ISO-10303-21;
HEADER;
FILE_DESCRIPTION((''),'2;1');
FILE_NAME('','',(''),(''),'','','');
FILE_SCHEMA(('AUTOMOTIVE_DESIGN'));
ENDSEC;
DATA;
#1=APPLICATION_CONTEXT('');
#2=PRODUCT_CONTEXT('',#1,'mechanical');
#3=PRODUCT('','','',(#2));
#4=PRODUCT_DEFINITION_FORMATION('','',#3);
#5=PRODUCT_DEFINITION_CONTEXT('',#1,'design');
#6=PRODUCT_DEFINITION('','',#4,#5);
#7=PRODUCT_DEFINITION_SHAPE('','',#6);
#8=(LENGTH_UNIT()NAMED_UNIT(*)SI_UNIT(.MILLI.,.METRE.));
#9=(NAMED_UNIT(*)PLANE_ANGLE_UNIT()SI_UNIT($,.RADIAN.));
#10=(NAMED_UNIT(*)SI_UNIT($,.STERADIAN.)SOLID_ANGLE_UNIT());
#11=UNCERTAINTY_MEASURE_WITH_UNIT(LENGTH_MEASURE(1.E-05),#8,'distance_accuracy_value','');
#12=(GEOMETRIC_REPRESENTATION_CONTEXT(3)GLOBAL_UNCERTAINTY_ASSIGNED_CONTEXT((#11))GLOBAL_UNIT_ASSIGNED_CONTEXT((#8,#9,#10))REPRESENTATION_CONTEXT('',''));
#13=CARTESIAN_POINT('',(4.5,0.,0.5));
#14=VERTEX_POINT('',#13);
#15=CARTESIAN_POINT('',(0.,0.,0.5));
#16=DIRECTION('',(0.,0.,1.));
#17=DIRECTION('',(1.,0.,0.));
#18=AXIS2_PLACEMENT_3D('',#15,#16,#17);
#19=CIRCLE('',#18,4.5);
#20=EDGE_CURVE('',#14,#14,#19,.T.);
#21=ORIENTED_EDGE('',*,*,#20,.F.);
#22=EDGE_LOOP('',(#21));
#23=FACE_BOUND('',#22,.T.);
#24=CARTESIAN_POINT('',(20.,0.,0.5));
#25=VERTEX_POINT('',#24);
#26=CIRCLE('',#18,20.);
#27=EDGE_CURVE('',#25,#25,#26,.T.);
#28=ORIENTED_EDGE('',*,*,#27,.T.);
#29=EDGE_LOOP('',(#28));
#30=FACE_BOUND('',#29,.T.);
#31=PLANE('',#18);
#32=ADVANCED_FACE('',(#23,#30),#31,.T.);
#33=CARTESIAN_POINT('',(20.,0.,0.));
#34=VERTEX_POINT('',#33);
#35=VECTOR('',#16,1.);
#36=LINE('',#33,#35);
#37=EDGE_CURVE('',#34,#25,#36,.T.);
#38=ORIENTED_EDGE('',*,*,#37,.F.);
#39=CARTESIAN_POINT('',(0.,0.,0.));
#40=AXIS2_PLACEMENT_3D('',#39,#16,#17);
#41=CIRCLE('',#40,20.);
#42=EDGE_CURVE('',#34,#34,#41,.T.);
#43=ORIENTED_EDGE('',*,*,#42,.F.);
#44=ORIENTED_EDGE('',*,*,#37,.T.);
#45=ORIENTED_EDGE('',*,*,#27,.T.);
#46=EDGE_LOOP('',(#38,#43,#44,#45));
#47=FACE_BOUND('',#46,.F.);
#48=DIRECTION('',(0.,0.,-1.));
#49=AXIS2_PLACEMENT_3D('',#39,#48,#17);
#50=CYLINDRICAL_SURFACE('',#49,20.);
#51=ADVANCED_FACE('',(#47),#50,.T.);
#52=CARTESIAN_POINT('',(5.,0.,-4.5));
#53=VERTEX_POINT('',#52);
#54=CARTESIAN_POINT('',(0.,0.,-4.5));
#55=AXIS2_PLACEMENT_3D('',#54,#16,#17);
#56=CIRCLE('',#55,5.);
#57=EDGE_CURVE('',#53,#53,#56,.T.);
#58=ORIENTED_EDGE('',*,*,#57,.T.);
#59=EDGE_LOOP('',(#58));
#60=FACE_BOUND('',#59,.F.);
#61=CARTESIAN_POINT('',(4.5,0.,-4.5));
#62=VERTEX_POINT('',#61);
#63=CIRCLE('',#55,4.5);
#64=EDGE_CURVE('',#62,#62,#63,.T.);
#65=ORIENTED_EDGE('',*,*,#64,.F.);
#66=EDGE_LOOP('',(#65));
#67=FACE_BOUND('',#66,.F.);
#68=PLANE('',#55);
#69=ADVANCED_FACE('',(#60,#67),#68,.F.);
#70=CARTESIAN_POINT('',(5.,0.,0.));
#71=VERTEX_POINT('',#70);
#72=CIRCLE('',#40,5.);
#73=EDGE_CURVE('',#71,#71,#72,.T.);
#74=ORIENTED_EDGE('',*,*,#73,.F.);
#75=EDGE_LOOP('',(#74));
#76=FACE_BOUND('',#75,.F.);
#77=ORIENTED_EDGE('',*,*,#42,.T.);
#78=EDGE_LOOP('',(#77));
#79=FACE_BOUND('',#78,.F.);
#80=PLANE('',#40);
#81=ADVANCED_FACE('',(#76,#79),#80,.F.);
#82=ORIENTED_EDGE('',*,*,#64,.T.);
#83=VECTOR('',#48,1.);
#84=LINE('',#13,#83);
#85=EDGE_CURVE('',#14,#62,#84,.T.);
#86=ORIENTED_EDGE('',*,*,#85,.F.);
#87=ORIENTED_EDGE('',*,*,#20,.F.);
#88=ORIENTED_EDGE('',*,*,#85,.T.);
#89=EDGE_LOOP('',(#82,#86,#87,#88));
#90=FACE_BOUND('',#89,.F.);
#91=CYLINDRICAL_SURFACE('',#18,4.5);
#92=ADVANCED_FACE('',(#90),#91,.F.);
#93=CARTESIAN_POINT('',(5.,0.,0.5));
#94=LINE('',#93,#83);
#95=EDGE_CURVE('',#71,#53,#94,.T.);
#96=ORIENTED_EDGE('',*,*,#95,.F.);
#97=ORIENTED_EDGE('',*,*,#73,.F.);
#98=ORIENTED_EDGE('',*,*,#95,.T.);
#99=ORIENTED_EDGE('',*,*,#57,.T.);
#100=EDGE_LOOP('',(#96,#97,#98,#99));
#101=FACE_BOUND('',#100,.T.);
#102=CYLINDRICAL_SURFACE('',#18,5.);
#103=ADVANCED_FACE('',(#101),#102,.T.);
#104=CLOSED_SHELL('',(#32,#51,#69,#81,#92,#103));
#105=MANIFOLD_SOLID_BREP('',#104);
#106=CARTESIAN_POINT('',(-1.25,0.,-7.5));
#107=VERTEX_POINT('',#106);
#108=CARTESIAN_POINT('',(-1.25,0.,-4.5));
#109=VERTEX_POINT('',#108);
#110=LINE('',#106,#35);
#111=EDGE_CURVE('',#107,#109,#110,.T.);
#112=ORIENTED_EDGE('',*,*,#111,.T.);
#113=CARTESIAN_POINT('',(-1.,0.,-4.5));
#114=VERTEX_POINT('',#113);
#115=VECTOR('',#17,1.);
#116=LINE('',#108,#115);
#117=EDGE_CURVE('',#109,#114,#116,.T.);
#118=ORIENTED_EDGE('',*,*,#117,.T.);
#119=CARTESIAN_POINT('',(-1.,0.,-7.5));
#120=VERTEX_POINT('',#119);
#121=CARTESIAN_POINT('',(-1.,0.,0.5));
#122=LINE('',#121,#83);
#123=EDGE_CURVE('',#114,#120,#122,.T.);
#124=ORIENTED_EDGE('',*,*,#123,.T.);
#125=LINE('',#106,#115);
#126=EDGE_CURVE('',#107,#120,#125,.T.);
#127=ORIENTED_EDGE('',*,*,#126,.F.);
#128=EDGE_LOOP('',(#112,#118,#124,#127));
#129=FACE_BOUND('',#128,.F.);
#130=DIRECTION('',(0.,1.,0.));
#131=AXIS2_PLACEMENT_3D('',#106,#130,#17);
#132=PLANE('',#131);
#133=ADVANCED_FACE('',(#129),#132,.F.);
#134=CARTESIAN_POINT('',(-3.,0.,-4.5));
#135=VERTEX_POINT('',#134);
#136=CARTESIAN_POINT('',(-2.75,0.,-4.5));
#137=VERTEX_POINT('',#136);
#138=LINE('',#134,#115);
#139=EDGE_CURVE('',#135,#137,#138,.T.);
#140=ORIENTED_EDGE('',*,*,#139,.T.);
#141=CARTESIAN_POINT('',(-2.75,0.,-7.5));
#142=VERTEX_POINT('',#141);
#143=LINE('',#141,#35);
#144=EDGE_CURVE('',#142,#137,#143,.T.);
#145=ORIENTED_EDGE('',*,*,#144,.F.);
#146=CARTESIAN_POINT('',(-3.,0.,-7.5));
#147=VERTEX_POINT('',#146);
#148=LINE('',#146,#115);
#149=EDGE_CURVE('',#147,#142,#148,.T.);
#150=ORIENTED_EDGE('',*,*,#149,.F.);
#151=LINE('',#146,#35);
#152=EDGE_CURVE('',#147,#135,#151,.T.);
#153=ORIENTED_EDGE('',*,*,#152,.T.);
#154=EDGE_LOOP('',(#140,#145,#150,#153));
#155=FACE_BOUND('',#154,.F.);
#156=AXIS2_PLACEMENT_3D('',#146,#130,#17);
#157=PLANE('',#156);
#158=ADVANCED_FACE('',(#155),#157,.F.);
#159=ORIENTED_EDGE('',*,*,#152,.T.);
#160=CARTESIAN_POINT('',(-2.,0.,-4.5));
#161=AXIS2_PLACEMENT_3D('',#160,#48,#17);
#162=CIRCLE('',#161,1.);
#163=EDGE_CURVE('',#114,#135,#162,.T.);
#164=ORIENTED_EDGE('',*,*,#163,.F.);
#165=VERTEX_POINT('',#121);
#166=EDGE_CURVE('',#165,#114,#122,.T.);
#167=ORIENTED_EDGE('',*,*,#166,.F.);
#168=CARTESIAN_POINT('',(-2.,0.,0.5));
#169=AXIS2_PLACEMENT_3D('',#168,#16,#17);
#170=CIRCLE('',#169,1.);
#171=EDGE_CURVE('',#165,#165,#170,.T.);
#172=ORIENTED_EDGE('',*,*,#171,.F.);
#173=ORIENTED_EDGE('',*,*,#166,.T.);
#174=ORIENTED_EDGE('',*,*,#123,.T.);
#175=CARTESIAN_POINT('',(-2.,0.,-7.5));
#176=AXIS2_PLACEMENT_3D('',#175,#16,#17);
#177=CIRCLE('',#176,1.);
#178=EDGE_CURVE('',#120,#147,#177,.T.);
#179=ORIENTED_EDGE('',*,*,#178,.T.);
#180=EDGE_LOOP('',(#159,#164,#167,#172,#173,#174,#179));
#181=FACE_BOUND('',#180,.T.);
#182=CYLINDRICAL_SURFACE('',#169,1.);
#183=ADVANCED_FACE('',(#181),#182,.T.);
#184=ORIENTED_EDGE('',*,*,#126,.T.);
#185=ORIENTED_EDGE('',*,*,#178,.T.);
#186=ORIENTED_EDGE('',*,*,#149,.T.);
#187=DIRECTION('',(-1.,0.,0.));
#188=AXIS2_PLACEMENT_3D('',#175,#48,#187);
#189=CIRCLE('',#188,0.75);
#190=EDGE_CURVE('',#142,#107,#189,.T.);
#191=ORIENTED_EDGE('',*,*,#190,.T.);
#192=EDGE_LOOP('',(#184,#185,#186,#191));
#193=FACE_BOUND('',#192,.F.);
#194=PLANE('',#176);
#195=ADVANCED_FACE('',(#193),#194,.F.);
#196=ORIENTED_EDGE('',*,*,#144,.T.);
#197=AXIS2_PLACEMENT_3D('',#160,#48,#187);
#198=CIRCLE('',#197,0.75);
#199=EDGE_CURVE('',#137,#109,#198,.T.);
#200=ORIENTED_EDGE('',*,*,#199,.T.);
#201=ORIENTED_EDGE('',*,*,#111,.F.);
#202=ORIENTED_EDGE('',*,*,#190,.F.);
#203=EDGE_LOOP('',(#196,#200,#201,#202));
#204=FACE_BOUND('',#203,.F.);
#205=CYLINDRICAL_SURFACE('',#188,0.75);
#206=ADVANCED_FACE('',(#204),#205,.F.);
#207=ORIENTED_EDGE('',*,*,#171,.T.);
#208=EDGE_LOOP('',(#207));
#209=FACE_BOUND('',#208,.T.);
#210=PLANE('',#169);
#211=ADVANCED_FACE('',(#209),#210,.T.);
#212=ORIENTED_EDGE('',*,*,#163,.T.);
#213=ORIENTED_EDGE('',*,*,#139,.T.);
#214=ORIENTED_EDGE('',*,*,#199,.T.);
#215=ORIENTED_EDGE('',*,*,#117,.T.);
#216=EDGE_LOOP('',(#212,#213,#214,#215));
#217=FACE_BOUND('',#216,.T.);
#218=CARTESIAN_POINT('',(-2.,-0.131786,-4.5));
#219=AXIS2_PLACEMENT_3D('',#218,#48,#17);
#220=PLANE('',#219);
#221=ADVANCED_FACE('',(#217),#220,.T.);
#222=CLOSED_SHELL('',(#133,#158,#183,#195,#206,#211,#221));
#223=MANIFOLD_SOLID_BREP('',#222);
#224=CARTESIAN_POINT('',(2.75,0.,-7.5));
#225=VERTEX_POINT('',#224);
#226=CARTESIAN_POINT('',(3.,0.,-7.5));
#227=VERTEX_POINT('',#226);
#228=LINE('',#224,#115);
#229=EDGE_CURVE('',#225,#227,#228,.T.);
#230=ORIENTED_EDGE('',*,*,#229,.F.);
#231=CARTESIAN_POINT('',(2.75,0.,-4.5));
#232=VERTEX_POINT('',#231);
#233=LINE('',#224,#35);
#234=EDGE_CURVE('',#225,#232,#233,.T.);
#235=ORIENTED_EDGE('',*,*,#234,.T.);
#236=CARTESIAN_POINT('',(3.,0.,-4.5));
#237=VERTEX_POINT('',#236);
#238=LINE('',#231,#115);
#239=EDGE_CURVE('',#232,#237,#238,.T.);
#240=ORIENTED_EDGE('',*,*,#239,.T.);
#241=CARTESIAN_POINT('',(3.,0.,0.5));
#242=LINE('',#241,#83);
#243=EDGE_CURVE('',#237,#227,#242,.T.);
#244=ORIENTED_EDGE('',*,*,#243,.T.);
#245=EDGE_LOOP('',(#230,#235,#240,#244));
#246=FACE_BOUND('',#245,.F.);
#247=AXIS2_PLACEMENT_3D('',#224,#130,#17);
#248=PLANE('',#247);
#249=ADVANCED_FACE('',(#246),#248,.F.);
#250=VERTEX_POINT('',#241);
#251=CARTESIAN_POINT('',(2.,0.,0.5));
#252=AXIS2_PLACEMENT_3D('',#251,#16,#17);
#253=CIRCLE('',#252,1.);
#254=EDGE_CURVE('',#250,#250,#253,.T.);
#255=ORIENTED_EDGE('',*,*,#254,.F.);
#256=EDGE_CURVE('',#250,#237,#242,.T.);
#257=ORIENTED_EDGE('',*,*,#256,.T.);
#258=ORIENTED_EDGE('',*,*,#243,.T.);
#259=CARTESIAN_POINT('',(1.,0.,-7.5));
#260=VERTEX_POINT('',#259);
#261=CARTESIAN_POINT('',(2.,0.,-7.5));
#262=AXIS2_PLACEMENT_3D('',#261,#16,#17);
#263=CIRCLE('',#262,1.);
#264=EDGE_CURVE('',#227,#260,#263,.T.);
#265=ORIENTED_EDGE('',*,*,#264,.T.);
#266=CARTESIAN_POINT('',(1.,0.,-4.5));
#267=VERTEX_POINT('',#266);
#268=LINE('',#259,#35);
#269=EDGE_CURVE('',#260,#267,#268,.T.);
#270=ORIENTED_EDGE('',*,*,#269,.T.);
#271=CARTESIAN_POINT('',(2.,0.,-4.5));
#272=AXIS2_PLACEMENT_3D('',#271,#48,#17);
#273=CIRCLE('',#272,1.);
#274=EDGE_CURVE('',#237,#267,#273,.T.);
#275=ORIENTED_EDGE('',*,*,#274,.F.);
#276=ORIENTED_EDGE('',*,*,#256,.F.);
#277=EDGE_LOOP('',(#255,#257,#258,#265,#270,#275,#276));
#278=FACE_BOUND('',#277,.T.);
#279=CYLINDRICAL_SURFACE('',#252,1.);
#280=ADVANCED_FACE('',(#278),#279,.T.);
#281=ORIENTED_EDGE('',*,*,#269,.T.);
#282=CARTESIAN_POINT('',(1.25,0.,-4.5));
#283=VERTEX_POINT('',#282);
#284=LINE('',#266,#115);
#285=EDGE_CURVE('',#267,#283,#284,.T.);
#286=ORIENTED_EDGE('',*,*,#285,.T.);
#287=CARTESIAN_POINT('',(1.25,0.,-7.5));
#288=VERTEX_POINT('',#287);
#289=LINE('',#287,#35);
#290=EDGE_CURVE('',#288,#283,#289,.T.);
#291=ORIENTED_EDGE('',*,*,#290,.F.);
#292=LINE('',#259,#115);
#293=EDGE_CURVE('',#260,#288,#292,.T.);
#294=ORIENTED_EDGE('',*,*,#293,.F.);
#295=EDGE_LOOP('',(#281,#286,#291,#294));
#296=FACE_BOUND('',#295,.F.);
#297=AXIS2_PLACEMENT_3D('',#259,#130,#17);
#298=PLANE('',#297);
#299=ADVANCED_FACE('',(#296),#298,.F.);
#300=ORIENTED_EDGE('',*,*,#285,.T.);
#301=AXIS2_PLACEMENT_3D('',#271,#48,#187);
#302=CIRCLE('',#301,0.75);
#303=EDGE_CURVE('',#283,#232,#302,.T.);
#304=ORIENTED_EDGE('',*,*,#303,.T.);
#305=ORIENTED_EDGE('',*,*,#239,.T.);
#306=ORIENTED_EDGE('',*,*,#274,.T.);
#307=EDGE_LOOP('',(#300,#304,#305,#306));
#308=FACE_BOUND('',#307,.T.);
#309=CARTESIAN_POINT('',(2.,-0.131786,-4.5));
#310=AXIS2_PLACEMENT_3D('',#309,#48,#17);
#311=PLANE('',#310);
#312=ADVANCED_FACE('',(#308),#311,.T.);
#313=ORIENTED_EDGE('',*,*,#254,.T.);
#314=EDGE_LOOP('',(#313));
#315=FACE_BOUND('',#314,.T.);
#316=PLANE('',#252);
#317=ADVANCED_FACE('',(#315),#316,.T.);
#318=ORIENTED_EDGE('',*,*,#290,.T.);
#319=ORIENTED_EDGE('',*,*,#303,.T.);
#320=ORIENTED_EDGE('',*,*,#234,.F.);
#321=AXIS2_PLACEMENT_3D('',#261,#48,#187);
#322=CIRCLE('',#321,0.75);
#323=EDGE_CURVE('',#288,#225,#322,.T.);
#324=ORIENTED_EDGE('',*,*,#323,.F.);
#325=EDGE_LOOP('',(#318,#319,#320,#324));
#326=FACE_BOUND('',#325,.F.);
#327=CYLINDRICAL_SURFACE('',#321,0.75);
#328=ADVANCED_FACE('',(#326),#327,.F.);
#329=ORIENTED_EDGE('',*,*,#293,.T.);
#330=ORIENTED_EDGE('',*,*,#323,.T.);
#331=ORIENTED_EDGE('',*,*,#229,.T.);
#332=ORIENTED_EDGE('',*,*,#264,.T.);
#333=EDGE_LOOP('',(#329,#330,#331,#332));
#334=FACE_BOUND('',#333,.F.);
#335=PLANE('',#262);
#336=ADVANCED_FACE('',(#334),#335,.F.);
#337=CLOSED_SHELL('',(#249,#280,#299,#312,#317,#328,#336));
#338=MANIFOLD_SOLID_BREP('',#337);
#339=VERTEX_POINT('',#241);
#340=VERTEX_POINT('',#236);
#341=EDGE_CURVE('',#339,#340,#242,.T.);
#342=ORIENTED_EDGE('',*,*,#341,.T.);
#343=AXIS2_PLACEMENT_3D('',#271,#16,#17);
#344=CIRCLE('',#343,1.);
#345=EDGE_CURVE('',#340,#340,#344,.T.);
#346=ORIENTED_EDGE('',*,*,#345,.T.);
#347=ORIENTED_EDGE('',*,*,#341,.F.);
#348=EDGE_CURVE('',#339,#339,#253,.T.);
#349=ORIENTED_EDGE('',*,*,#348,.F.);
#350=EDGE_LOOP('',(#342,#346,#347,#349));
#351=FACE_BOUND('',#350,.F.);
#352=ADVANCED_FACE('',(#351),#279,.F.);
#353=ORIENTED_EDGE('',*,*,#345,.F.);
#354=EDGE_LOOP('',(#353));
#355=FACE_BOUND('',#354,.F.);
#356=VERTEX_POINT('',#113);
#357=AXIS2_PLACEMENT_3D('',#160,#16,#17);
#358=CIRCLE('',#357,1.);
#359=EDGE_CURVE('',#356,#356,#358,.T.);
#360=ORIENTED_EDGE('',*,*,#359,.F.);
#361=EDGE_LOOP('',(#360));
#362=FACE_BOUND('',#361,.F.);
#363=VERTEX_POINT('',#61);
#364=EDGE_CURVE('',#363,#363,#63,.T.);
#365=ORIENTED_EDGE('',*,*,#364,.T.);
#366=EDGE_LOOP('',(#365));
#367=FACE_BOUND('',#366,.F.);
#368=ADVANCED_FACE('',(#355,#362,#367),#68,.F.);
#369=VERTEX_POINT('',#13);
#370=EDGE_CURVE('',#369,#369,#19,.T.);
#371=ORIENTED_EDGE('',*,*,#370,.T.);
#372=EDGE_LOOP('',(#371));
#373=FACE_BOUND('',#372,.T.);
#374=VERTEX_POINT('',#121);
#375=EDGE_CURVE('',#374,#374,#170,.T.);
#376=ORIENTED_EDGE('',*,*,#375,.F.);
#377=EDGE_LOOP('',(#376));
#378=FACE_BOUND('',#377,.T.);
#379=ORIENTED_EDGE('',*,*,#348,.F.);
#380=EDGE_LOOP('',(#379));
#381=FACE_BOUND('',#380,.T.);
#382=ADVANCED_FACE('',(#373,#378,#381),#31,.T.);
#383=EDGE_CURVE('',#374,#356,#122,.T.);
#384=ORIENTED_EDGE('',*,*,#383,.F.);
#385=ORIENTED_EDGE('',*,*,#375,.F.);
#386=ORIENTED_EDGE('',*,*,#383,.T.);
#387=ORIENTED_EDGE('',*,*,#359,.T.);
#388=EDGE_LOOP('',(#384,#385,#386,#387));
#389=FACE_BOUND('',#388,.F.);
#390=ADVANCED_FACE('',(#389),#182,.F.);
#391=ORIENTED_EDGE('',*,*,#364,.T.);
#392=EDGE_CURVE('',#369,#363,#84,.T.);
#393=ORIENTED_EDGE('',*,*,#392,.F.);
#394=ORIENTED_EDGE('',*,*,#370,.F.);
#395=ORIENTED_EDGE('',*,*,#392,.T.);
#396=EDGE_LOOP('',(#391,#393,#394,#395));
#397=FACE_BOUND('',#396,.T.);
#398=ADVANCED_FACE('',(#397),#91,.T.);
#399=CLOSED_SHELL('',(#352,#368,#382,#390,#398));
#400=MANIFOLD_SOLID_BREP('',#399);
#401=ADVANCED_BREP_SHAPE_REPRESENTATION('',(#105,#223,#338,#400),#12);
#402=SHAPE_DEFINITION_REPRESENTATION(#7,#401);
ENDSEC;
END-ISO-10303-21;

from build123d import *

# Parameters (mm, degrees)
F0_R      = 20
F1_DEPTH  = 0.5
F2_R      = 5
F3_DEPTH  = 5
F4_R      = 4.5
F5_DEPTH  = 25
F6_R      = 4.5
F7_DEPTH  = 5
F8_R      = 1
F9_DEPTH  = 8
F11_DEPTH = 3
F12_R     = 1
F13_DEPTH = 25


with BuildPart() as f1:
    # F0 (on Top) → F1 (new body)
    with BuildSketch(Plane.XY):
        Circle(F0_R)
    extrude(amount=F1_DEPTH)

    # F2 (on face) → F3 (join)
    with BuildSketch(Plane.XY.offset(0.5)):
        Circle(F2_R)
    extrude(amount=-F3_DEPTH)

    # F4 (on face) → F5 (cut)
    with BuildSketch(Plane.XY.offset(0.5)):
        Circle(F4_R)
    extrude(amount=-F5_DEPTH, mode=Mode.SUBTRACT)


with BuildPart() as f7:
    # F6 (on face) → F7 (new body)
    with BuildSketch(Plane.XY.offset(0.5)):
        Circle(F6_R)
    extrude(amount=-F7_DEPTH)

    # F12 (on face) → F13 (cut)
    with BuildSketch(Plane.XY.offset(0.5)):
        with Locations((-2, 0)):
            Circle(F12_R)
        with Locations((2, 0)):
            Circle(F12_R)
    extrude(amount=-F13_DEPTH, mode=Mode.SUBTRACT)


with BuildPart() as f9:
    # F8 (on face) → F9 (new body)
    with BuildSketch(Plane.XY.offset(0.5)):
        with Locations((-2, 0)):
            Circle(F8_R)
    extrude(amount=-F9_DEPTH)


with BuildPart() as f9b:
    # F8 (on face) → F9, piece 2 (new body)
    with BuildSketch(Plane.XY.offset(0.5)):
        with Locations((2, 0)):
            Circle(F8_R)
    extrude(amount=-F9_DEPTH)


with BuildPart() as f11_tool:
    # F10 (on face) → F11 (new body)
    with BuildSketch(Plane(origin=(0, 0, -7.5), x_dir=(1, 0, 0), z_dir=(0, 0, -1))):
        with BuildLine():
            Line((-1.25, 0), (-1, 0))
            ThreePointArc((-1, 0), (-2, 1), (-3, 0))
            Line((-3, 0), (-2.75, 0))
            ThreePointArc((-2.75, 0), (-2, -0.75), (-1.25, 0))
        make_face()
        with BuildLine():
            Line((2.75, 0), (3, 0))
            ThreePointArc((3, 0), (2, 1), (1, 0))
            Line((1, 0), (1.25, 0))
            ThreePointArc((1.25, 0), (2, -0.75), (2.75, 0))
        make_face()
    extrude(amount=-F11_DEPTH)


with BuildPart() as f9_1:
    add(f9.part)

    # F11: cut by f11_tool
    add(f11_tool.part, mode=Mode.SUBTRACT)


with BuildPart() as f9b_1:
    add(f9b.part)

    # F11: cut by f11_tool
    add(f11_tool.part, mode=Mode.SUBTRACT)


solid = Compound([f1.part, f7.part, f9_1.part, f9b_1.part])
